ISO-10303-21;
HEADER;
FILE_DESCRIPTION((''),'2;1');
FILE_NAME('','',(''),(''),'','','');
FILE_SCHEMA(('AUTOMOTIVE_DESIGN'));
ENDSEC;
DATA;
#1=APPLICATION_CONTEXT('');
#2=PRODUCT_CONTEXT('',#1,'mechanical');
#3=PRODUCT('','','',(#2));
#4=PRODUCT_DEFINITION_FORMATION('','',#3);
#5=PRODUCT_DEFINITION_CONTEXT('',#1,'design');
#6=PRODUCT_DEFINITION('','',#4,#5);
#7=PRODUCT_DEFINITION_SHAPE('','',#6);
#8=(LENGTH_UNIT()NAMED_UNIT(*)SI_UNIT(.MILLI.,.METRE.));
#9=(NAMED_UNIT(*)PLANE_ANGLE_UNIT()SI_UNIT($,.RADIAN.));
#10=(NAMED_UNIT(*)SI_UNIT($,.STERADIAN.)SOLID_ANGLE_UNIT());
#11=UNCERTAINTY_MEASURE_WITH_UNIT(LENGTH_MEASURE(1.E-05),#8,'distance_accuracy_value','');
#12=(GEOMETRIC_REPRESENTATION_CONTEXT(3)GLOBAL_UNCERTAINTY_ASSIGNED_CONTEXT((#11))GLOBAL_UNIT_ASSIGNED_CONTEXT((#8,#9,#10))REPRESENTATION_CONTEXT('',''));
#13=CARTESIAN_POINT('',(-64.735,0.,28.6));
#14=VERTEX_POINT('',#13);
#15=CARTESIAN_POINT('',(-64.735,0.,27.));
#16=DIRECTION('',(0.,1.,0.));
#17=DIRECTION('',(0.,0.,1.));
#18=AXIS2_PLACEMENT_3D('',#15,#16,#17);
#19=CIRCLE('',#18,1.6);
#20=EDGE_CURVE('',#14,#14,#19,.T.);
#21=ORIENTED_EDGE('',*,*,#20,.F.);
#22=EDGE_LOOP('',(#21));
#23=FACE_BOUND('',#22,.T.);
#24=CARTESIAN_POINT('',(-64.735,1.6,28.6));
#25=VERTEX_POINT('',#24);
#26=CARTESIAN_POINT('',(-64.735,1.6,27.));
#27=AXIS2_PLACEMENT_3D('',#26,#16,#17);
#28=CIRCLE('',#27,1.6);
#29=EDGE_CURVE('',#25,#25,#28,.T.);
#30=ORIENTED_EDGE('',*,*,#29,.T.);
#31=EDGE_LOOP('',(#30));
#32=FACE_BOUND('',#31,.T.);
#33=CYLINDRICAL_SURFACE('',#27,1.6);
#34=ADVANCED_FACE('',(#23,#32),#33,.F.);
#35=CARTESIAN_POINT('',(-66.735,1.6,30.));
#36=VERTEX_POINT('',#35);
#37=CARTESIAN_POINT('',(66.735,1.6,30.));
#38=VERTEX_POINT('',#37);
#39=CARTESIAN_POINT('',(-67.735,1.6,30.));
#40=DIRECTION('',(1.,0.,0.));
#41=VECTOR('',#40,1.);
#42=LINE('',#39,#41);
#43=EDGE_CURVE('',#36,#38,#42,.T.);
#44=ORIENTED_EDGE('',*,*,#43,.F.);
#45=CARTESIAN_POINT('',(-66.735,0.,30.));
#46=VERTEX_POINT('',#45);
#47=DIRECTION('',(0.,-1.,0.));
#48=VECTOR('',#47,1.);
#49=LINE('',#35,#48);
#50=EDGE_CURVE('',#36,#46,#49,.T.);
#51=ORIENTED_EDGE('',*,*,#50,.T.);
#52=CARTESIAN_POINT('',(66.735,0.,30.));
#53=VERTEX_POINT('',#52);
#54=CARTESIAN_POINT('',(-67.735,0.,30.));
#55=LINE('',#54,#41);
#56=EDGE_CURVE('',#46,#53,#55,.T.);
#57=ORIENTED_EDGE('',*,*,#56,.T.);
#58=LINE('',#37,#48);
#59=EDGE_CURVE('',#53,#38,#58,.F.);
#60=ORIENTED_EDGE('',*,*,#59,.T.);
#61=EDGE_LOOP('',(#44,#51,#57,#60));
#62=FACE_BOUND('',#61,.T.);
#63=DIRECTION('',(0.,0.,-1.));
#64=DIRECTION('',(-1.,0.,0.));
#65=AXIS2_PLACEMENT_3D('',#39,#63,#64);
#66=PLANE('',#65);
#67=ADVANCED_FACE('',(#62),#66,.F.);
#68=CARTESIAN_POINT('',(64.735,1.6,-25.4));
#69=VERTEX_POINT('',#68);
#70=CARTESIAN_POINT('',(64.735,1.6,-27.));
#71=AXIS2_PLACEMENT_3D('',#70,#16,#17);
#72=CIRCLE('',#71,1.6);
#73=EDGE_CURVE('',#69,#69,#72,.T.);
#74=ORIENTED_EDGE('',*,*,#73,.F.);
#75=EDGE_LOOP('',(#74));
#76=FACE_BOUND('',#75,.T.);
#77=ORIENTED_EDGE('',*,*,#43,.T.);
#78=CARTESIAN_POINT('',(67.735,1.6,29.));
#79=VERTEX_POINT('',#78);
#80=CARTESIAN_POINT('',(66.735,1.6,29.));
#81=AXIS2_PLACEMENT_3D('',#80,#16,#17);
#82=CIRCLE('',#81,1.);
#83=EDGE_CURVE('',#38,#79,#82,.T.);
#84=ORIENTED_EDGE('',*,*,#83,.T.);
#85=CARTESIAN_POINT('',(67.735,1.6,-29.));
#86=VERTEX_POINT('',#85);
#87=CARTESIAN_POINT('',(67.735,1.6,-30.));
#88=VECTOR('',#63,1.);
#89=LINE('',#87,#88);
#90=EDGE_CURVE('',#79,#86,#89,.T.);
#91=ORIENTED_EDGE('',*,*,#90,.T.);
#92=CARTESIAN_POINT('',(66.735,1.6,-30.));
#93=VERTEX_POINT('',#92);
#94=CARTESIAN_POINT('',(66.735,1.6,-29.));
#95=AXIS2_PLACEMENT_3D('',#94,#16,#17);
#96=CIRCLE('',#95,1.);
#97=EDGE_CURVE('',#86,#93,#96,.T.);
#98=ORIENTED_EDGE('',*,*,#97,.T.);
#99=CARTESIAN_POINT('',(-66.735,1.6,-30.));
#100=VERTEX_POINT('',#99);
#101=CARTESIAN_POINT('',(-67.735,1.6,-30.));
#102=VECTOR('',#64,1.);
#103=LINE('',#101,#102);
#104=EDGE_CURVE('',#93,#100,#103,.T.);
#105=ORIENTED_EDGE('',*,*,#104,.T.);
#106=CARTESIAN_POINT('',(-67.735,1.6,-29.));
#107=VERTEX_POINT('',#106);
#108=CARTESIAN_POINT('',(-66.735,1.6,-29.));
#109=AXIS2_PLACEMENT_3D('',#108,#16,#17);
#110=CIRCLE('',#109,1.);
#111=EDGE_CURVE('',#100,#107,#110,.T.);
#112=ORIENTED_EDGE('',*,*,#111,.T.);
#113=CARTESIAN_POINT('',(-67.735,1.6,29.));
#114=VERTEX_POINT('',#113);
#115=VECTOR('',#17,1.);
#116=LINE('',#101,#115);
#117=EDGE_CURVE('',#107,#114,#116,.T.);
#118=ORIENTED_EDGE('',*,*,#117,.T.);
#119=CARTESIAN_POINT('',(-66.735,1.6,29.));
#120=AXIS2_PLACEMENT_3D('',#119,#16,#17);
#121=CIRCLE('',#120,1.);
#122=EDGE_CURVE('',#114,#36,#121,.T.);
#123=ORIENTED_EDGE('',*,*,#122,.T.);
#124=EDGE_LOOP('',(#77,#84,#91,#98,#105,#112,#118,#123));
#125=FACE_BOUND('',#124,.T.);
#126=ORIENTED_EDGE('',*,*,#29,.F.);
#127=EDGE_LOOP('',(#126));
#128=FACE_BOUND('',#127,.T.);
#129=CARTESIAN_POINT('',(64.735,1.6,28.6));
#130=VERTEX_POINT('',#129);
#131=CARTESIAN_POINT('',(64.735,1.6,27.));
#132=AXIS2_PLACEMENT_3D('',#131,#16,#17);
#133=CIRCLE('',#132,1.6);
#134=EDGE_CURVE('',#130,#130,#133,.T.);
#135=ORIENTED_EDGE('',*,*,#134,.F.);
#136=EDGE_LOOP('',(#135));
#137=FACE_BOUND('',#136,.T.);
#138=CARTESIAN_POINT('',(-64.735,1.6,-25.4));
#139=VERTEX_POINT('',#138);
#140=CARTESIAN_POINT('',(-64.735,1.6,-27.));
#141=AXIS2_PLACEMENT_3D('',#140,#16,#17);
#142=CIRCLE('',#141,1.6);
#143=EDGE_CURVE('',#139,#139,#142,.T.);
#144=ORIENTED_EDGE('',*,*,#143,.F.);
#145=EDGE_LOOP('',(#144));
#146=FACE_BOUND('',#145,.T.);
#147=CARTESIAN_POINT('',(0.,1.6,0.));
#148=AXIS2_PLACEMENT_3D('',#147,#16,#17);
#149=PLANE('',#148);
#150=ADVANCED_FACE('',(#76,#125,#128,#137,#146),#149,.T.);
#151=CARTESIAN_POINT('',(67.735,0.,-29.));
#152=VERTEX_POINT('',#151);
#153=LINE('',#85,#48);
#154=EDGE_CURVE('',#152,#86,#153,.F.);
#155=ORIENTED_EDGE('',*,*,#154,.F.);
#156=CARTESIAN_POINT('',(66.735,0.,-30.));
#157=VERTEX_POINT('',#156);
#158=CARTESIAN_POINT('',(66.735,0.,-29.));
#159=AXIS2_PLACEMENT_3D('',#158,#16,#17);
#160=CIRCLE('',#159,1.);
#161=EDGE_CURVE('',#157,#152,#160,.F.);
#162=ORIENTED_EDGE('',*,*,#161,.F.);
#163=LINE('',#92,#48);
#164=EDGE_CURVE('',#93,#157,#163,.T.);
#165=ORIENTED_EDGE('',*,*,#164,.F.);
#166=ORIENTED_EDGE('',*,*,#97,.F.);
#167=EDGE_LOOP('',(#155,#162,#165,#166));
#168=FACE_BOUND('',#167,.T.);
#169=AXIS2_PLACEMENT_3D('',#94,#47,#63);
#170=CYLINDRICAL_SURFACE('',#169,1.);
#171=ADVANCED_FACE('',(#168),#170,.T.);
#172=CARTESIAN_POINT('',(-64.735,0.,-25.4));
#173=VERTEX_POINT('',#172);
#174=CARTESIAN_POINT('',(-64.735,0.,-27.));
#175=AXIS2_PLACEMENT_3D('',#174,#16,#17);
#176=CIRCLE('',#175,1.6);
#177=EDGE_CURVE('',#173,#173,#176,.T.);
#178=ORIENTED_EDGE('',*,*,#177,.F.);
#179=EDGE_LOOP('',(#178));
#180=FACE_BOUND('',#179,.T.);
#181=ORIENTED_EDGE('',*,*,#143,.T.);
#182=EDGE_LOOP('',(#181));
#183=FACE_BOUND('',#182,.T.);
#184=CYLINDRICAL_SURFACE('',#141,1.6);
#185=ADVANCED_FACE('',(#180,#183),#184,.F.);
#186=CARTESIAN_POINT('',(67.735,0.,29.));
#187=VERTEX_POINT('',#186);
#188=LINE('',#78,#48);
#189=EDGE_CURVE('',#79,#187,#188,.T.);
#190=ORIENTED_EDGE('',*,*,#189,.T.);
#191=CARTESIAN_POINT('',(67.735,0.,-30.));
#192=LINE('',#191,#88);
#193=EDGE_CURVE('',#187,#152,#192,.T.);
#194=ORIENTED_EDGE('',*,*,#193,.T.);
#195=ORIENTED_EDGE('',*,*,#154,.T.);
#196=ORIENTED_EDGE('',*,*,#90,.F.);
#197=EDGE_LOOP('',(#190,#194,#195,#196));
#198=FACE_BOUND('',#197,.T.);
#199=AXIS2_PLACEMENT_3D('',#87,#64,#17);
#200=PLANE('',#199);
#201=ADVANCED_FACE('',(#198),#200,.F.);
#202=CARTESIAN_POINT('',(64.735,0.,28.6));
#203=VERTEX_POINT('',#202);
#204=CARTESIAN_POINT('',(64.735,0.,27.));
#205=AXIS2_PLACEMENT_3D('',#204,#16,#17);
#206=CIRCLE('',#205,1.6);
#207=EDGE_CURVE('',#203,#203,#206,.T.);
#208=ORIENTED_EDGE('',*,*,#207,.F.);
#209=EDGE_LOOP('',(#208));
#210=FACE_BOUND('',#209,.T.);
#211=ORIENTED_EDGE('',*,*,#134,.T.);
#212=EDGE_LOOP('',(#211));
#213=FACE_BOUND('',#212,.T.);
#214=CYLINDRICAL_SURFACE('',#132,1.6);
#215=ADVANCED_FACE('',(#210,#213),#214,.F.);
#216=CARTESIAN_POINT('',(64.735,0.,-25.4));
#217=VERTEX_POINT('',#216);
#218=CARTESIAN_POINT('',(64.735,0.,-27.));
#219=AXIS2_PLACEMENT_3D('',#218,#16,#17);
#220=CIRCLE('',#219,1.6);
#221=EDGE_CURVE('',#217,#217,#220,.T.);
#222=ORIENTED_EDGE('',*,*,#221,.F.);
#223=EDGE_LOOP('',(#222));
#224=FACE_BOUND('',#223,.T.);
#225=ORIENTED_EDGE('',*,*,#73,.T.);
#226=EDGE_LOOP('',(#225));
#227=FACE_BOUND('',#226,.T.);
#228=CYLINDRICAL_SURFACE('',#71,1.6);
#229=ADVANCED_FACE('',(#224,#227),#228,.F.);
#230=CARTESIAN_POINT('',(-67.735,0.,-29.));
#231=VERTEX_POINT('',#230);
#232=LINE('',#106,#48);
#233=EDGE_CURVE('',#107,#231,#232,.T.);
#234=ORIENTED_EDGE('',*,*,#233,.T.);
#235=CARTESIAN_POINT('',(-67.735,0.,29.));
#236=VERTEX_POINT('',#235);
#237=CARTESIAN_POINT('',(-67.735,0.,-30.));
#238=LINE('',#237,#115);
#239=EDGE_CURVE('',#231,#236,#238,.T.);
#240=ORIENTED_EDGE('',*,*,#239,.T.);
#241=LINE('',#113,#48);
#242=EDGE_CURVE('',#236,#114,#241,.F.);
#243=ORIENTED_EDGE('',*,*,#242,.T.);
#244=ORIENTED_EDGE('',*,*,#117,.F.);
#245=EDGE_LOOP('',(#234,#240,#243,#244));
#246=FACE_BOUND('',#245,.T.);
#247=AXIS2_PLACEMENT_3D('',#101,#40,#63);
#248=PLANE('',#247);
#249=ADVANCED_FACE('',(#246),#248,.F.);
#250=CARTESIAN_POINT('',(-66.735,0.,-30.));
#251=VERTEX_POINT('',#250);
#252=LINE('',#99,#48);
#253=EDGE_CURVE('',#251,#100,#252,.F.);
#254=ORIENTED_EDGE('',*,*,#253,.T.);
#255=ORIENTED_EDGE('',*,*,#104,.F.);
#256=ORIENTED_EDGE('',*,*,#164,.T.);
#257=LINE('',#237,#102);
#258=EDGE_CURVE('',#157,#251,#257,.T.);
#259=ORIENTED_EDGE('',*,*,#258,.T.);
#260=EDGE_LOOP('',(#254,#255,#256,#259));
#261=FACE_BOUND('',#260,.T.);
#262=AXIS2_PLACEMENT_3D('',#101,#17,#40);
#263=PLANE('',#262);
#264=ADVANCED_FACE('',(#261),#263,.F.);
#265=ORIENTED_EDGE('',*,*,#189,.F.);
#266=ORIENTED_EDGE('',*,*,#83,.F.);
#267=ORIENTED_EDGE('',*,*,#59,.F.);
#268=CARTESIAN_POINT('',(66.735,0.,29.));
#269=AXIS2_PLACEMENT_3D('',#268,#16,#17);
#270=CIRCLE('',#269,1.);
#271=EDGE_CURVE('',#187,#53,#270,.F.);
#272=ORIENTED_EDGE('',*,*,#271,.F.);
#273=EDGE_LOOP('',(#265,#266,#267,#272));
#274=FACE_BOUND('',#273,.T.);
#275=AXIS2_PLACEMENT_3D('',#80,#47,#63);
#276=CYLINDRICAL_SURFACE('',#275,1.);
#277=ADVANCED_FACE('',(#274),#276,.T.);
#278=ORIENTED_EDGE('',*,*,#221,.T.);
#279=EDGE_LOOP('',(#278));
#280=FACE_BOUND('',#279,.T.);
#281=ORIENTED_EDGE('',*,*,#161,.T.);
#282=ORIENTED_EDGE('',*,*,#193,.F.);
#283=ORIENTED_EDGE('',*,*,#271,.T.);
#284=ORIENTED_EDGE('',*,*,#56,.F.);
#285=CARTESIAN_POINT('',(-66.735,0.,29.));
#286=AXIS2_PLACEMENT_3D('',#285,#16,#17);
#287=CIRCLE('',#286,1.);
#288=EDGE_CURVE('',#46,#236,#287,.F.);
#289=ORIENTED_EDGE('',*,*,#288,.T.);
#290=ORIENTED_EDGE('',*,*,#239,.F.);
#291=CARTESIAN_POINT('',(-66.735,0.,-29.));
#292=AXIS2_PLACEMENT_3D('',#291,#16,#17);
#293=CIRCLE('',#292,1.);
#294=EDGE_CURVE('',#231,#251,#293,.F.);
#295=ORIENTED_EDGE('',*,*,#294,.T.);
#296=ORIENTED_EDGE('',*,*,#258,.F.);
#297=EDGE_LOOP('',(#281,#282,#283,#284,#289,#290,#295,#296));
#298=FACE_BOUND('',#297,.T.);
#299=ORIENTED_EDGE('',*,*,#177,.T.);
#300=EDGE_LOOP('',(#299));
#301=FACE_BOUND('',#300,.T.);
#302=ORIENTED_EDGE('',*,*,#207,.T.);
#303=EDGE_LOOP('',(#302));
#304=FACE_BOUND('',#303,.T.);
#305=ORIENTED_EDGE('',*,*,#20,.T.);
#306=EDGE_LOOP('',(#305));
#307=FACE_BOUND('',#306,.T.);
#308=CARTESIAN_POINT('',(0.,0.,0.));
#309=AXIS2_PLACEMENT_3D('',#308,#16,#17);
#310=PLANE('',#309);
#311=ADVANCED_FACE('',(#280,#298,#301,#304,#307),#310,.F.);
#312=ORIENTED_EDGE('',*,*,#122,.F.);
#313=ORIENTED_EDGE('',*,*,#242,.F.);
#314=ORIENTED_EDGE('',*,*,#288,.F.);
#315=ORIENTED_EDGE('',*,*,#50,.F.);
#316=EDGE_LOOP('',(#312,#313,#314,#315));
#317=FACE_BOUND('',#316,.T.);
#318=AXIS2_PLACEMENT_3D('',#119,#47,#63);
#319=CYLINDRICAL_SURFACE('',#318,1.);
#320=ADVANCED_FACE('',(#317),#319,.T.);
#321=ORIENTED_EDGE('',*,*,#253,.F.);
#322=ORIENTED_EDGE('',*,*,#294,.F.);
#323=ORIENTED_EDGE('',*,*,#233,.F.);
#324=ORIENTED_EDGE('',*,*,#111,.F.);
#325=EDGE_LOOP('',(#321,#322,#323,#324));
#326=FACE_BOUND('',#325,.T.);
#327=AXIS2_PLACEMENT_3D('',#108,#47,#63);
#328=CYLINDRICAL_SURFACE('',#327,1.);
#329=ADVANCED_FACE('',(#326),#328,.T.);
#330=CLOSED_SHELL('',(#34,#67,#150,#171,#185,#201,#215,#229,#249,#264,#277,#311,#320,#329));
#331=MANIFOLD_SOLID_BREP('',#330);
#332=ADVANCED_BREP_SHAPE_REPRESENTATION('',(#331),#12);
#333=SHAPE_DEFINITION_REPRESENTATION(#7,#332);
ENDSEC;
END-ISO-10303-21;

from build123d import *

# Parameters (mm, degrees)
SKETCH_1_W                 = 135.47
SKETCH_1_H                 = 60
EXTRUDE_1_DEPTH            = 1.6
HOLE_WIZARD_M3_1_OUTLINE_R = 1.6
HOLE_WIZARD_M3_1_DEPTH     = 1.6
FILLET_1_R                 = 1


# Read off the part's stored shape, not the designer's step: M3 すきま穴1
with BuildPart() as part:
    # ｽｹｯﾁ1 → ﾎﾞｽ - 押し出し1 (new body)
    with BuildSketch(Plane(origin=(0, 0, 0), x_dir=(1, 0, 0), z_dir=(0, 1, 0))):
        Rectangle(SKETCH_1_W, SKETCH_1_H)
    extrude(amount=EXTRUDE_1_DEPTH)

    # M3 すきま穴1 outline → M3 すきま穴1 (cut)
    with BuildSketch(Plane(origin=(0, 0, 0), x_dir=(1, 0, 0), z_dir=(0, 1, 0))):
        with Locations((64.735, 27)):
            Circle(HOLE_WIZARD_M3_1_OUTLINE_R)
        with Locations((-64.735, -27)):
            Circle(HOLE_WIZARD_M3_1_OUTLINE_R)
        with Locations((64.735, -27)):
            Circle(HOLE_WIZARD_M3_1_OUTLINE_R)
        with Locations((-64.735, 27)):
            Circle(HOLE_WIZARD_M3_1_OUTLINE_R)
    extrude(amount=HOLE_WIZARD_M3_1_DEPTH, mode=Mode.SUBTRACT)

    # ﾌｨﾚｯﾄ1
    fillet_1_edges = [part.edges().sort_by_distance(p)[0] for p in [
        (67.735, 0.8, 30),
        (-67.735, 0.8, 30),
        (-67.735, 0.8, -30),
        (67.735, 0.8, -30),
    ]]
    fillet(fillet_1_edges, radius=FILLET_1_R)


solid = part.part
